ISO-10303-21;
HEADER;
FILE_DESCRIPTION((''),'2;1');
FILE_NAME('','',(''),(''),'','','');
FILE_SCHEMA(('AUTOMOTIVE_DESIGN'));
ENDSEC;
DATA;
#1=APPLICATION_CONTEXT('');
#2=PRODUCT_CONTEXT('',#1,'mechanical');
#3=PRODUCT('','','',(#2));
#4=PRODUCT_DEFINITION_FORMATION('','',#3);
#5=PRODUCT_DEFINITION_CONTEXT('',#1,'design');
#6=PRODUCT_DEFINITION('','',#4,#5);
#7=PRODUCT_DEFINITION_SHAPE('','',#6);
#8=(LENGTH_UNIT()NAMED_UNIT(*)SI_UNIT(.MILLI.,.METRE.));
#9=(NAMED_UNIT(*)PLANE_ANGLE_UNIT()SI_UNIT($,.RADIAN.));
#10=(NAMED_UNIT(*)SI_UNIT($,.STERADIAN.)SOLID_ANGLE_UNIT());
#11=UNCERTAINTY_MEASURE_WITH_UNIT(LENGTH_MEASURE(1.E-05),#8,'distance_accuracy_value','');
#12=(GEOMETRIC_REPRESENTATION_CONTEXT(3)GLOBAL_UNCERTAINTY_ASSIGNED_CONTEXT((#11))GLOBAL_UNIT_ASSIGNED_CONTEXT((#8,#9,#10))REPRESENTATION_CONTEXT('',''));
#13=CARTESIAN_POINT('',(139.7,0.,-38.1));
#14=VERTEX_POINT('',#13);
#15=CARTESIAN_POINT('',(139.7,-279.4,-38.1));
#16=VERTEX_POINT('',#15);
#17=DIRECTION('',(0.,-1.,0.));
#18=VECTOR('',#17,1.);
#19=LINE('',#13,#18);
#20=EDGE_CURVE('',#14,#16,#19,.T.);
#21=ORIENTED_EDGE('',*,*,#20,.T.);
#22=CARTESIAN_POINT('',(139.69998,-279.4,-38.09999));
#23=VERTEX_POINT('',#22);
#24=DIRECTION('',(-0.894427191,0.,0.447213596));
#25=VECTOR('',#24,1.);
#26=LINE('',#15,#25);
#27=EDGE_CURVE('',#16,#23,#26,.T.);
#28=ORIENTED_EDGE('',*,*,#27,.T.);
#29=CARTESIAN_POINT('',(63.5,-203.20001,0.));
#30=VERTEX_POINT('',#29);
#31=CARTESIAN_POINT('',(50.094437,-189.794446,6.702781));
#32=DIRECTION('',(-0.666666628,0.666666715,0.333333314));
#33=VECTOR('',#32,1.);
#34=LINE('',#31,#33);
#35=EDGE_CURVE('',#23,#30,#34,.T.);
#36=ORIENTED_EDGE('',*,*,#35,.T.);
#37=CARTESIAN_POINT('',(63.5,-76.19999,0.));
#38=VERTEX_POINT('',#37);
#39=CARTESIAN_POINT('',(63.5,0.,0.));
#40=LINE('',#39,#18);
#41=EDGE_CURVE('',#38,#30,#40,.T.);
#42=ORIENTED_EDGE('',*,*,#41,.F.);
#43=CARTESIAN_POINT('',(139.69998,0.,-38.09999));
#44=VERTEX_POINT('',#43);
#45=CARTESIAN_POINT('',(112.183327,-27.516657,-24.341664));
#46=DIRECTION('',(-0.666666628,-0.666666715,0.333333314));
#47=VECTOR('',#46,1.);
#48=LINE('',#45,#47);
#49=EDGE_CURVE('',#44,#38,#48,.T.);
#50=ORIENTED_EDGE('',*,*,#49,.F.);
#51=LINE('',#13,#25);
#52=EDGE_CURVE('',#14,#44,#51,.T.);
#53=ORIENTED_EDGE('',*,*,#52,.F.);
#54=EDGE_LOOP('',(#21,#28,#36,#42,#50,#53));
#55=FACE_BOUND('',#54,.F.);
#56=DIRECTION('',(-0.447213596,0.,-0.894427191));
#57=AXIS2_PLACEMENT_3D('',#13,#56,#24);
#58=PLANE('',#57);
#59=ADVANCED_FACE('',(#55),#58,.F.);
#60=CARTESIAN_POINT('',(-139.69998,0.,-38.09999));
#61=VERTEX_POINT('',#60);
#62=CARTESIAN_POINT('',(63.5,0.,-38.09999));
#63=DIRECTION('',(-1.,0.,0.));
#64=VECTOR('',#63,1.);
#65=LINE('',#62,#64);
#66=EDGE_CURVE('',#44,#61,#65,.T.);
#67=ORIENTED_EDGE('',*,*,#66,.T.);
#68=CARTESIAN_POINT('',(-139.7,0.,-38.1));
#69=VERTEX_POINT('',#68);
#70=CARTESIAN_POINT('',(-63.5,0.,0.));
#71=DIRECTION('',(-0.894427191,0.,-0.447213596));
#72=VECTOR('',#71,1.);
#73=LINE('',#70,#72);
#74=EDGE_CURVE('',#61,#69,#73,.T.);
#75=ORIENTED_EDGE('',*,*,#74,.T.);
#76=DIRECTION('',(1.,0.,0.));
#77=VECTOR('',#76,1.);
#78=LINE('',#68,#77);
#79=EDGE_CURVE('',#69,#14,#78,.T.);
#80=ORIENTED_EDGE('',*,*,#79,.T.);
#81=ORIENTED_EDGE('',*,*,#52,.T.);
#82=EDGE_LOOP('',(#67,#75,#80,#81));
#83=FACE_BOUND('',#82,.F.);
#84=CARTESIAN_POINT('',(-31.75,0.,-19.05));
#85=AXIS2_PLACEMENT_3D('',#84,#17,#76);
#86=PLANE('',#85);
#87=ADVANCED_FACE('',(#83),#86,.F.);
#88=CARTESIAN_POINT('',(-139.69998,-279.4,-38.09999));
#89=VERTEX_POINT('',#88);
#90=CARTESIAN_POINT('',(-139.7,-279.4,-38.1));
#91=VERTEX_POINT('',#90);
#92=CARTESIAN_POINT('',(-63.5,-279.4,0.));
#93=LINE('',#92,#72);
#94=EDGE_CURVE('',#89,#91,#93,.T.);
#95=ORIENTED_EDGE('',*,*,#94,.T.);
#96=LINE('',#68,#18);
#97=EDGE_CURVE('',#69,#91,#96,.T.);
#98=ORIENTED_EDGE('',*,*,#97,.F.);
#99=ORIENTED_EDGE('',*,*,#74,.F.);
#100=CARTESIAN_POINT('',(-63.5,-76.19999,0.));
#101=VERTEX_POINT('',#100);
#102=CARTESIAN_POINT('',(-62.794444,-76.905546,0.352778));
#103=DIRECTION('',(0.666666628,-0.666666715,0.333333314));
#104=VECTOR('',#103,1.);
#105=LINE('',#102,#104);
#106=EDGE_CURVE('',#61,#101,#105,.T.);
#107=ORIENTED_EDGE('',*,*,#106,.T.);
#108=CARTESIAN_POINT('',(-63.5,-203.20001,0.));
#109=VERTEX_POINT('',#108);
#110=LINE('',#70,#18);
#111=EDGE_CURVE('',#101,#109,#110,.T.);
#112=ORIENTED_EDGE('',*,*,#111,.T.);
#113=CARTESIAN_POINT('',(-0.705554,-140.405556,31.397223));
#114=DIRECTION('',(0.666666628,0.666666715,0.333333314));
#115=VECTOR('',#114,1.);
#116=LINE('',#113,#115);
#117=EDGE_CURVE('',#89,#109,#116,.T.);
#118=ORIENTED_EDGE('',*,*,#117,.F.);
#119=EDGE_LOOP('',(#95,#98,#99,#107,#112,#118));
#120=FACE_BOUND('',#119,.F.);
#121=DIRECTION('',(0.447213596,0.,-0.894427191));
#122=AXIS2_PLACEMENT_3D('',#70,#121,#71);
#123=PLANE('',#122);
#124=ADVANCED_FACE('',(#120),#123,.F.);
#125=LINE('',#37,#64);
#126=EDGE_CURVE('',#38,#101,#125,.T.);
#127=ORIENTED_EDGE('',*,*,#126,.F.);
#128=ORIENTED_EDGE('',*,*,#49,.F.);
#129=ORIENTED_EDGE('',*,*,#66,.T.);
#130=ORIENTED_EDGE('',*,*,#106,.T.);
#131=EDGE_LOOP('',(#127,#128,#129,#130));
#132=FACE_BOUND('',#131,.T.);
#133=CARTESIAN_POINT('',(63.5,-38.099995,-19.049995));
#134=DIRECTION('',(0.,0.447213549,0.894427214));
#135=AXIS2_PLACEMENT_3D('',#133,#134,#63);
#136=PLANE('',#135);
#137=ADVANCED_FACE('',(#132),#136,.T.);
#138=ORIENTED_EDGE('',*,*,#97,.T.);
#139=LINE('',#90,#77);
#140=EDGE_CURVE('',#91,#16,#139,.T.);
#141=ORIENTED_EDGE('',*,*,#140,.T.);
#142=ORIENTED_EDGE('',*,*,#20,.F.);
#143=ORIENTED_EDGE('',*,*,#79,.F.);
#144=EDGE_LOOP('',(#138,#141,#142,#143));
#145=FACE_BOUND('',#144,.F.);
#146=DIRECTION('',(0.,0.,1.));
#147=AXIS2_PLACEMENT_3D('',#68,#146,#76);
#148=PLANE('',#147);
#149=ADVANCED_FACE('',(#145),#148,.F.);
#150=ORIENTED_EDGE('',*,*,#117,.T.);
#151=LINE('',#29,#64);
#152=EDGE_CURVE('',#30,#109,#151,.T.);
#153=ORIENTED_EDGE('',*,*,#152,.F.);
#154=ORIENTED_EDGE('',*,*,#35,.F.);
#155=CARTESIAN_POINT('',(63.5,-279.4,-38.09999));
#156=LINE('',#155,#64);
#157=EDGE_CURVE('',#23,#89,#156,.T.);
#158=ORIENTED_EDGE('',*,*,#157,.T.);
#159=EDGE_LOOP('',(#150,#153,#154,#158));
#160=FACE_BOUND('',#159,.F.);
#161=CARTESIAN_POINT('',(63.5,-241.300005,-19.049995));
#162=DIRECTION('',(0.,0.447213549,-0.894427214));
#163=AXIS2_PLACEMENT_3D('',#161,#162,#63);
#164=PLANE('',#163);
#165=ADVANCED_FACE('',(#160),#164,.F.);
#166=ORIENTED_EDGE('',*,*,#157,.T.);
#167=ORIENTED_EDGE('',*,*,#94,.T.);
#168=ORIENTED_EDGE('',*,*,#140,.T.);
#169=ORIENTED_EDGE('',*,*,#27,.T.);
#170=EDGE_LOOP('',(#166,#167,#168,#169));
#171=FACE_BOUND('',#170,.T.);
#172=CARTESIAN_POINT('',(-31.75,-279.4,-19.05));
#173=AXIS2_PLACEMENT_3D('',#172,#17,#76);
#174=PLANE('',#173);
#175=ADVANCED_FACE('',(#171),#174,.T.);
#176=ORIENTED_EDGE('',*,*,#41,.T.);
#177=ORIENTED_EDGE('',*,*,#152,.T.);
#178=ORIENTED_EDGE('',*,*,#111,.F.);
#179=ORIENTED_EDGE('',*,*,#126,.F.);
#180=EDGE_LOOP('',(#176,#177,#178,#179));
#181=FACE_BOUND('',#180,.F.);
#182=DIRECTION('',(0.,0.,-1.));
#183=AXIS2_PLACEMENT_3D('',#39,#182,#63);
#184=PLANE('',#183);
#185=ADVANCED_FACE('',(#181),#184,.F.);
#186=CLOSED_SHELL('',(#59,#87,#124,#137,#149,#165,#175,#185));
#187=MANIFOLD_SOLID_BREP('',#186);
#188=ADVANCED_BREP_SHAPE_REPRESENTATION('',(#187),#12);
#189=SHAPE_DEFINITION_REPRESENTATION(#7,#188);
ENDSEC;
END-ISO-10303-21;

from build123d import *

# Parameters (mm, degrees)
F0_W       = 63.5
F0_H       = 38.1
F1_DEPTH   = 279.4
F2_SIZE2   = 76.19999
F2_SIZE    = 38.09999
F2_2_SIZE2 = 76.19999
F2_2_SIZE  = 38.09999


# Not quite as in the source:
# - a fillet or chamfer is up to 0.001 mm smaller than in the source, because OpenCascade refuses the exact size


with BuildPart() as f1:
    # F0 (on Front) → F1 (new body)
    with BuildSketch(Plane.XZ):
        with Locations((-31.75, -19.05)):
            Rectangle(F0_W, F0_H)
        Polygon((0, 0), (0, -38.1), (139.7, -38.1), (63.5, 0), align=None)
        Polygon((-63.5, 0), (-139.7, -38.1), (-63.5, -38.1), align=None)
    extrude(amount=F1_DEPTH)

    # F2 (size 38.1 and 76.2 in the source; OpenCascade refuses exactly that, so slightly less here)
    f2_edges = [f1.edges().sort_by_distance(p)[0] for p in [
        (0, -279.4, 0),
    ]]
    f2_side = f1.faces().sort_by_distance((0, -279.4, -21.43125))[0]
    chamfer(f2_edges, length=F2_SIZE, length2=F2_SIZE2, reference=f2_side)

    # F2#2 (size 38.1 and 76.2 in the source; OpenCascade refuses exactly that, so slightly less here)
    f2_2_edges = [f1.edges().sort_by_distance(p)[0] for p in [
        (0, 0, 0),
    ]]
    f2_2_side = f1.faces().sort_by_distance((0, 0, -21.43125))[0]
    chamfer(f2_2_edges, length=F2_2_SIZE, length2=F2_2_SIZE2, reference=f2_2_side)


solid = f1.part
